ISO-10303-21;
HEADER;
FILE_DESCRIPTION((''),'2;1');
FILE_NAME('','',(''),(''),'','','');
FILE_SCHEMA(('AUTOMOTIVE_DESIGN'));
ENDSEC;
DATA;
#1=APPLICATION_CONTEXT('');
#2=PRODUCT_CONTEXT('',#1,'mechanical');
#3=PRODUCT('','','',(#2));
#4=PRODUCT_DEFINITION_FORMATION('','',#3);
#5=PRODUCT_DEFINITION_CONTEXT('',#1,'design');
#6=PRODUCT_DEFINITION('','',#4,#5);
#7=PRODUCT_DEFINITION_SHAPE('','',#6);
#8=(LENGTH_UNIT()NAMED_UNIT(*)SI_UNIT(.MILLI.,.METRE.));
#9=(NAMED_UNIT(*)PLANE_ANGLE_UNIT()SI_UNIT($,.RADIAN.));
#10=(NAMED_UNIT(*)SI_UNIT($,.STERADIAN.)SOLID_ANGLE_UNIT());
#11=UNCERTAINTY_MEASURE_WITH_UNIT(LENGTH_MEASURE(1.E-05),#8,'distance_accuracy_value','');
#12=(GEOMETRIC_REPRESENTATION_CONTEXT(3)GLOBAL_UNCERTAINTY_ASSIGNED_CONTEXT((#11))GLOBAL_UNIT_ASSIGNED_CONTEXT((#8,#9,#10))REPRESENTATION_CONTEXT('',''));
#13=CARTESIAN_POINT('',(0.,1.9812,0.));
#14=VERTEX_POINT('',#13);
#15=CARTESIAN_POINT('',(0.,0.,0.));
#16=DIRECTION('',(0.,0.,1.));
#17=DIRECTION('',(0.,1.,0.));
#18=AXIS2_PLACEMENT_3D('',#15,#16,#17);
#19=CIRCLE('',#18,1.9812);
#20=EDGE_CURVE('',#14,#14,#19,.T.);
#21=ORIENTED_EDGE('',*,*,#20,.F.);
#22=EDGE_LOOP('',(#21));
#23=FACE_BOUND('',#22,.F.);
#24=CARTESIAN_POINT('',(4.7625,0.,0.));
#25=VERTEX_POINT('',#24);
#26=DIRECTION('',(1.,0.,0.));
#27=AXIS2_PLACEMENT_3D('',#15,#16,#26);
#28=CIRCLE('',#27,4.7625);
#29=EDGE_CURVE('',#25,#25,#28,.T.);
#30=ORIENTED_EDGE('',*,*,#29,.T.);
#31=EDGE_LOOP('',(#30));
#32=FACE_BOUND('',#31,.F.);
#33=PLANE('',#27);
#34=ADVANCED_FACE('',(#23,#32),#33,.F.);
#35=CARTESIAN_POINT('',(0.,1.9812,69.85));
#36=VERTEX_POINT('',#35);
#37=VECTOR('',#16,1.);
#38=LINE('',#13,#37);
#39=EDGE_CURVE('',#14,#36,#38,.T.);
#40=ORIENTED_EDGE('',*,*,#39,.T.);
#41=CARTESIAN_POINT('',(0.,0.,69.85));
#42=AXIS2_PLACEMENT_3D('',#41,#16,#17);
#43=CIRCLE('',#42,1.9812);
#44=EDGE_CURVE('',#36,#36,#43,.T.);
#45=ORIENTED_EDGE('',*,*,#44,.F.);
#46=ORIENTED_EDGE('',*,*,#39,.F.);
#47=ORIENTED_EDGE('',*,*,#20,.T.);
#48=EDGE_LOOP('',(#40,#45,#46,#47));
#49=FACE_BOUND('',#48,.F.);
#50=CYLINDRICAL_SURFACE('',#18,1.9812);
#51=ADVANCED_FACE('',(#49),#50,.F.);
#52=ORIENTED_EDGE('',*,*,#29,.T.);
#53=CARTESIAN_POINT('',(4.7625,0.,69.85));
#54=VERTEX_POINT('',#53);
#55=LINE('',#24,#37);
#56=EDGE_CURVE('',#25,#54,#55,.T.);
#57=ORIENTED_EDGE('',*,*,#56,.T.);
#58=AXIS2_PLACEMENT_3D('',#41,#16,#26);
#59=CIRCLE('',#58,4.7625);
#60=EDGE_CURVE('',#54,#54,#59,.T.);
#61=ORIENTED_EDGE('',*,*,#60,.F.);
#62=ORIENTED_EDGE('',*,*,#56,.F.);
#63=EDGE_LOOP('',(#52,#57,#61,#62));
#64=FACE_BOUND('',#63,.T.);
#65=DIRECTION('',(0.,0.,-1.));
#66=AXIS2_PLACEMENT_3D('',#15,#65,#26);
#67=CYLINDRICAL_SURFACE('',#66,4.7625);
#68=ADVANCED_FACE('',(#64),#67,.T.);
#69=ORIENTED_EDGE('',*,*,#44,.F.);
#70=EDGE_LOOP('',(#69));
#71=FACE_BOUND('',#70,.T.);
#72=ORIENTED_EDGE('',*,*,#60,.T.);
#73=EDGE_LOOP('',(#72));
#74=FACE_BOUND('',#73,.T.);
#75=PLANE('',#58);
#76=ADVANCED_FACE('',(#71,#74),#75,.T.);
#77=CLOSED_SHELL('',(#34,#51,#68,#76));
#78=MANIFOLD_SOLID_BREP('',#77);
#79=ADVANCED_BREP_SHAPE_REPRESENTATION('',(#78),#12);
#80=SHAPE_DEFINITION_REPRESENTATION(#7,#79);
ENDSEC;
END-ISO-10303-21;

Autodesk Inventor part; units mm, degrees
ref_plane "YZ Plane" through (0, 0, 0) normal (1, 0, 0) x (0, 1, 0)
ref_plane "XZ Plane" through (0, 0, 0) normal (0, 1, 0) x (-1, 0, 0)
ref_plane "XY Plane" through (0, 0, 0) normal (0, 0, 1) x (1, 0, 0)
sketch "Sketch1" plane through (0, 0, 0) normal (0, 0, 1) x (1, 0, 0)
  circle A0 centre (0, 0) radius 4.7625
  dimension "d10" = 9.525
extrude "Extrusion1" add sketch "Sketch1" along normal blind 69.85
hole "Hole1" at (0, 0, 0) direction (0, 0, 1) diameter 3.9624 end through all thread size "10-32 UNF" class "2B" standard "ANSI Unified Screw Threads"
equation "\"d10\" = OutsideDiameter"
equation "\"d1\" = StandoffLength"
equation "\"StandoffLength\" = 69.85"
equation "\"HoleDiameter\" = 5.1054"
equation "\"OutsideDiameter\" = 9.525"
properties part number "GP10-014" material "Aluminum 6061"
